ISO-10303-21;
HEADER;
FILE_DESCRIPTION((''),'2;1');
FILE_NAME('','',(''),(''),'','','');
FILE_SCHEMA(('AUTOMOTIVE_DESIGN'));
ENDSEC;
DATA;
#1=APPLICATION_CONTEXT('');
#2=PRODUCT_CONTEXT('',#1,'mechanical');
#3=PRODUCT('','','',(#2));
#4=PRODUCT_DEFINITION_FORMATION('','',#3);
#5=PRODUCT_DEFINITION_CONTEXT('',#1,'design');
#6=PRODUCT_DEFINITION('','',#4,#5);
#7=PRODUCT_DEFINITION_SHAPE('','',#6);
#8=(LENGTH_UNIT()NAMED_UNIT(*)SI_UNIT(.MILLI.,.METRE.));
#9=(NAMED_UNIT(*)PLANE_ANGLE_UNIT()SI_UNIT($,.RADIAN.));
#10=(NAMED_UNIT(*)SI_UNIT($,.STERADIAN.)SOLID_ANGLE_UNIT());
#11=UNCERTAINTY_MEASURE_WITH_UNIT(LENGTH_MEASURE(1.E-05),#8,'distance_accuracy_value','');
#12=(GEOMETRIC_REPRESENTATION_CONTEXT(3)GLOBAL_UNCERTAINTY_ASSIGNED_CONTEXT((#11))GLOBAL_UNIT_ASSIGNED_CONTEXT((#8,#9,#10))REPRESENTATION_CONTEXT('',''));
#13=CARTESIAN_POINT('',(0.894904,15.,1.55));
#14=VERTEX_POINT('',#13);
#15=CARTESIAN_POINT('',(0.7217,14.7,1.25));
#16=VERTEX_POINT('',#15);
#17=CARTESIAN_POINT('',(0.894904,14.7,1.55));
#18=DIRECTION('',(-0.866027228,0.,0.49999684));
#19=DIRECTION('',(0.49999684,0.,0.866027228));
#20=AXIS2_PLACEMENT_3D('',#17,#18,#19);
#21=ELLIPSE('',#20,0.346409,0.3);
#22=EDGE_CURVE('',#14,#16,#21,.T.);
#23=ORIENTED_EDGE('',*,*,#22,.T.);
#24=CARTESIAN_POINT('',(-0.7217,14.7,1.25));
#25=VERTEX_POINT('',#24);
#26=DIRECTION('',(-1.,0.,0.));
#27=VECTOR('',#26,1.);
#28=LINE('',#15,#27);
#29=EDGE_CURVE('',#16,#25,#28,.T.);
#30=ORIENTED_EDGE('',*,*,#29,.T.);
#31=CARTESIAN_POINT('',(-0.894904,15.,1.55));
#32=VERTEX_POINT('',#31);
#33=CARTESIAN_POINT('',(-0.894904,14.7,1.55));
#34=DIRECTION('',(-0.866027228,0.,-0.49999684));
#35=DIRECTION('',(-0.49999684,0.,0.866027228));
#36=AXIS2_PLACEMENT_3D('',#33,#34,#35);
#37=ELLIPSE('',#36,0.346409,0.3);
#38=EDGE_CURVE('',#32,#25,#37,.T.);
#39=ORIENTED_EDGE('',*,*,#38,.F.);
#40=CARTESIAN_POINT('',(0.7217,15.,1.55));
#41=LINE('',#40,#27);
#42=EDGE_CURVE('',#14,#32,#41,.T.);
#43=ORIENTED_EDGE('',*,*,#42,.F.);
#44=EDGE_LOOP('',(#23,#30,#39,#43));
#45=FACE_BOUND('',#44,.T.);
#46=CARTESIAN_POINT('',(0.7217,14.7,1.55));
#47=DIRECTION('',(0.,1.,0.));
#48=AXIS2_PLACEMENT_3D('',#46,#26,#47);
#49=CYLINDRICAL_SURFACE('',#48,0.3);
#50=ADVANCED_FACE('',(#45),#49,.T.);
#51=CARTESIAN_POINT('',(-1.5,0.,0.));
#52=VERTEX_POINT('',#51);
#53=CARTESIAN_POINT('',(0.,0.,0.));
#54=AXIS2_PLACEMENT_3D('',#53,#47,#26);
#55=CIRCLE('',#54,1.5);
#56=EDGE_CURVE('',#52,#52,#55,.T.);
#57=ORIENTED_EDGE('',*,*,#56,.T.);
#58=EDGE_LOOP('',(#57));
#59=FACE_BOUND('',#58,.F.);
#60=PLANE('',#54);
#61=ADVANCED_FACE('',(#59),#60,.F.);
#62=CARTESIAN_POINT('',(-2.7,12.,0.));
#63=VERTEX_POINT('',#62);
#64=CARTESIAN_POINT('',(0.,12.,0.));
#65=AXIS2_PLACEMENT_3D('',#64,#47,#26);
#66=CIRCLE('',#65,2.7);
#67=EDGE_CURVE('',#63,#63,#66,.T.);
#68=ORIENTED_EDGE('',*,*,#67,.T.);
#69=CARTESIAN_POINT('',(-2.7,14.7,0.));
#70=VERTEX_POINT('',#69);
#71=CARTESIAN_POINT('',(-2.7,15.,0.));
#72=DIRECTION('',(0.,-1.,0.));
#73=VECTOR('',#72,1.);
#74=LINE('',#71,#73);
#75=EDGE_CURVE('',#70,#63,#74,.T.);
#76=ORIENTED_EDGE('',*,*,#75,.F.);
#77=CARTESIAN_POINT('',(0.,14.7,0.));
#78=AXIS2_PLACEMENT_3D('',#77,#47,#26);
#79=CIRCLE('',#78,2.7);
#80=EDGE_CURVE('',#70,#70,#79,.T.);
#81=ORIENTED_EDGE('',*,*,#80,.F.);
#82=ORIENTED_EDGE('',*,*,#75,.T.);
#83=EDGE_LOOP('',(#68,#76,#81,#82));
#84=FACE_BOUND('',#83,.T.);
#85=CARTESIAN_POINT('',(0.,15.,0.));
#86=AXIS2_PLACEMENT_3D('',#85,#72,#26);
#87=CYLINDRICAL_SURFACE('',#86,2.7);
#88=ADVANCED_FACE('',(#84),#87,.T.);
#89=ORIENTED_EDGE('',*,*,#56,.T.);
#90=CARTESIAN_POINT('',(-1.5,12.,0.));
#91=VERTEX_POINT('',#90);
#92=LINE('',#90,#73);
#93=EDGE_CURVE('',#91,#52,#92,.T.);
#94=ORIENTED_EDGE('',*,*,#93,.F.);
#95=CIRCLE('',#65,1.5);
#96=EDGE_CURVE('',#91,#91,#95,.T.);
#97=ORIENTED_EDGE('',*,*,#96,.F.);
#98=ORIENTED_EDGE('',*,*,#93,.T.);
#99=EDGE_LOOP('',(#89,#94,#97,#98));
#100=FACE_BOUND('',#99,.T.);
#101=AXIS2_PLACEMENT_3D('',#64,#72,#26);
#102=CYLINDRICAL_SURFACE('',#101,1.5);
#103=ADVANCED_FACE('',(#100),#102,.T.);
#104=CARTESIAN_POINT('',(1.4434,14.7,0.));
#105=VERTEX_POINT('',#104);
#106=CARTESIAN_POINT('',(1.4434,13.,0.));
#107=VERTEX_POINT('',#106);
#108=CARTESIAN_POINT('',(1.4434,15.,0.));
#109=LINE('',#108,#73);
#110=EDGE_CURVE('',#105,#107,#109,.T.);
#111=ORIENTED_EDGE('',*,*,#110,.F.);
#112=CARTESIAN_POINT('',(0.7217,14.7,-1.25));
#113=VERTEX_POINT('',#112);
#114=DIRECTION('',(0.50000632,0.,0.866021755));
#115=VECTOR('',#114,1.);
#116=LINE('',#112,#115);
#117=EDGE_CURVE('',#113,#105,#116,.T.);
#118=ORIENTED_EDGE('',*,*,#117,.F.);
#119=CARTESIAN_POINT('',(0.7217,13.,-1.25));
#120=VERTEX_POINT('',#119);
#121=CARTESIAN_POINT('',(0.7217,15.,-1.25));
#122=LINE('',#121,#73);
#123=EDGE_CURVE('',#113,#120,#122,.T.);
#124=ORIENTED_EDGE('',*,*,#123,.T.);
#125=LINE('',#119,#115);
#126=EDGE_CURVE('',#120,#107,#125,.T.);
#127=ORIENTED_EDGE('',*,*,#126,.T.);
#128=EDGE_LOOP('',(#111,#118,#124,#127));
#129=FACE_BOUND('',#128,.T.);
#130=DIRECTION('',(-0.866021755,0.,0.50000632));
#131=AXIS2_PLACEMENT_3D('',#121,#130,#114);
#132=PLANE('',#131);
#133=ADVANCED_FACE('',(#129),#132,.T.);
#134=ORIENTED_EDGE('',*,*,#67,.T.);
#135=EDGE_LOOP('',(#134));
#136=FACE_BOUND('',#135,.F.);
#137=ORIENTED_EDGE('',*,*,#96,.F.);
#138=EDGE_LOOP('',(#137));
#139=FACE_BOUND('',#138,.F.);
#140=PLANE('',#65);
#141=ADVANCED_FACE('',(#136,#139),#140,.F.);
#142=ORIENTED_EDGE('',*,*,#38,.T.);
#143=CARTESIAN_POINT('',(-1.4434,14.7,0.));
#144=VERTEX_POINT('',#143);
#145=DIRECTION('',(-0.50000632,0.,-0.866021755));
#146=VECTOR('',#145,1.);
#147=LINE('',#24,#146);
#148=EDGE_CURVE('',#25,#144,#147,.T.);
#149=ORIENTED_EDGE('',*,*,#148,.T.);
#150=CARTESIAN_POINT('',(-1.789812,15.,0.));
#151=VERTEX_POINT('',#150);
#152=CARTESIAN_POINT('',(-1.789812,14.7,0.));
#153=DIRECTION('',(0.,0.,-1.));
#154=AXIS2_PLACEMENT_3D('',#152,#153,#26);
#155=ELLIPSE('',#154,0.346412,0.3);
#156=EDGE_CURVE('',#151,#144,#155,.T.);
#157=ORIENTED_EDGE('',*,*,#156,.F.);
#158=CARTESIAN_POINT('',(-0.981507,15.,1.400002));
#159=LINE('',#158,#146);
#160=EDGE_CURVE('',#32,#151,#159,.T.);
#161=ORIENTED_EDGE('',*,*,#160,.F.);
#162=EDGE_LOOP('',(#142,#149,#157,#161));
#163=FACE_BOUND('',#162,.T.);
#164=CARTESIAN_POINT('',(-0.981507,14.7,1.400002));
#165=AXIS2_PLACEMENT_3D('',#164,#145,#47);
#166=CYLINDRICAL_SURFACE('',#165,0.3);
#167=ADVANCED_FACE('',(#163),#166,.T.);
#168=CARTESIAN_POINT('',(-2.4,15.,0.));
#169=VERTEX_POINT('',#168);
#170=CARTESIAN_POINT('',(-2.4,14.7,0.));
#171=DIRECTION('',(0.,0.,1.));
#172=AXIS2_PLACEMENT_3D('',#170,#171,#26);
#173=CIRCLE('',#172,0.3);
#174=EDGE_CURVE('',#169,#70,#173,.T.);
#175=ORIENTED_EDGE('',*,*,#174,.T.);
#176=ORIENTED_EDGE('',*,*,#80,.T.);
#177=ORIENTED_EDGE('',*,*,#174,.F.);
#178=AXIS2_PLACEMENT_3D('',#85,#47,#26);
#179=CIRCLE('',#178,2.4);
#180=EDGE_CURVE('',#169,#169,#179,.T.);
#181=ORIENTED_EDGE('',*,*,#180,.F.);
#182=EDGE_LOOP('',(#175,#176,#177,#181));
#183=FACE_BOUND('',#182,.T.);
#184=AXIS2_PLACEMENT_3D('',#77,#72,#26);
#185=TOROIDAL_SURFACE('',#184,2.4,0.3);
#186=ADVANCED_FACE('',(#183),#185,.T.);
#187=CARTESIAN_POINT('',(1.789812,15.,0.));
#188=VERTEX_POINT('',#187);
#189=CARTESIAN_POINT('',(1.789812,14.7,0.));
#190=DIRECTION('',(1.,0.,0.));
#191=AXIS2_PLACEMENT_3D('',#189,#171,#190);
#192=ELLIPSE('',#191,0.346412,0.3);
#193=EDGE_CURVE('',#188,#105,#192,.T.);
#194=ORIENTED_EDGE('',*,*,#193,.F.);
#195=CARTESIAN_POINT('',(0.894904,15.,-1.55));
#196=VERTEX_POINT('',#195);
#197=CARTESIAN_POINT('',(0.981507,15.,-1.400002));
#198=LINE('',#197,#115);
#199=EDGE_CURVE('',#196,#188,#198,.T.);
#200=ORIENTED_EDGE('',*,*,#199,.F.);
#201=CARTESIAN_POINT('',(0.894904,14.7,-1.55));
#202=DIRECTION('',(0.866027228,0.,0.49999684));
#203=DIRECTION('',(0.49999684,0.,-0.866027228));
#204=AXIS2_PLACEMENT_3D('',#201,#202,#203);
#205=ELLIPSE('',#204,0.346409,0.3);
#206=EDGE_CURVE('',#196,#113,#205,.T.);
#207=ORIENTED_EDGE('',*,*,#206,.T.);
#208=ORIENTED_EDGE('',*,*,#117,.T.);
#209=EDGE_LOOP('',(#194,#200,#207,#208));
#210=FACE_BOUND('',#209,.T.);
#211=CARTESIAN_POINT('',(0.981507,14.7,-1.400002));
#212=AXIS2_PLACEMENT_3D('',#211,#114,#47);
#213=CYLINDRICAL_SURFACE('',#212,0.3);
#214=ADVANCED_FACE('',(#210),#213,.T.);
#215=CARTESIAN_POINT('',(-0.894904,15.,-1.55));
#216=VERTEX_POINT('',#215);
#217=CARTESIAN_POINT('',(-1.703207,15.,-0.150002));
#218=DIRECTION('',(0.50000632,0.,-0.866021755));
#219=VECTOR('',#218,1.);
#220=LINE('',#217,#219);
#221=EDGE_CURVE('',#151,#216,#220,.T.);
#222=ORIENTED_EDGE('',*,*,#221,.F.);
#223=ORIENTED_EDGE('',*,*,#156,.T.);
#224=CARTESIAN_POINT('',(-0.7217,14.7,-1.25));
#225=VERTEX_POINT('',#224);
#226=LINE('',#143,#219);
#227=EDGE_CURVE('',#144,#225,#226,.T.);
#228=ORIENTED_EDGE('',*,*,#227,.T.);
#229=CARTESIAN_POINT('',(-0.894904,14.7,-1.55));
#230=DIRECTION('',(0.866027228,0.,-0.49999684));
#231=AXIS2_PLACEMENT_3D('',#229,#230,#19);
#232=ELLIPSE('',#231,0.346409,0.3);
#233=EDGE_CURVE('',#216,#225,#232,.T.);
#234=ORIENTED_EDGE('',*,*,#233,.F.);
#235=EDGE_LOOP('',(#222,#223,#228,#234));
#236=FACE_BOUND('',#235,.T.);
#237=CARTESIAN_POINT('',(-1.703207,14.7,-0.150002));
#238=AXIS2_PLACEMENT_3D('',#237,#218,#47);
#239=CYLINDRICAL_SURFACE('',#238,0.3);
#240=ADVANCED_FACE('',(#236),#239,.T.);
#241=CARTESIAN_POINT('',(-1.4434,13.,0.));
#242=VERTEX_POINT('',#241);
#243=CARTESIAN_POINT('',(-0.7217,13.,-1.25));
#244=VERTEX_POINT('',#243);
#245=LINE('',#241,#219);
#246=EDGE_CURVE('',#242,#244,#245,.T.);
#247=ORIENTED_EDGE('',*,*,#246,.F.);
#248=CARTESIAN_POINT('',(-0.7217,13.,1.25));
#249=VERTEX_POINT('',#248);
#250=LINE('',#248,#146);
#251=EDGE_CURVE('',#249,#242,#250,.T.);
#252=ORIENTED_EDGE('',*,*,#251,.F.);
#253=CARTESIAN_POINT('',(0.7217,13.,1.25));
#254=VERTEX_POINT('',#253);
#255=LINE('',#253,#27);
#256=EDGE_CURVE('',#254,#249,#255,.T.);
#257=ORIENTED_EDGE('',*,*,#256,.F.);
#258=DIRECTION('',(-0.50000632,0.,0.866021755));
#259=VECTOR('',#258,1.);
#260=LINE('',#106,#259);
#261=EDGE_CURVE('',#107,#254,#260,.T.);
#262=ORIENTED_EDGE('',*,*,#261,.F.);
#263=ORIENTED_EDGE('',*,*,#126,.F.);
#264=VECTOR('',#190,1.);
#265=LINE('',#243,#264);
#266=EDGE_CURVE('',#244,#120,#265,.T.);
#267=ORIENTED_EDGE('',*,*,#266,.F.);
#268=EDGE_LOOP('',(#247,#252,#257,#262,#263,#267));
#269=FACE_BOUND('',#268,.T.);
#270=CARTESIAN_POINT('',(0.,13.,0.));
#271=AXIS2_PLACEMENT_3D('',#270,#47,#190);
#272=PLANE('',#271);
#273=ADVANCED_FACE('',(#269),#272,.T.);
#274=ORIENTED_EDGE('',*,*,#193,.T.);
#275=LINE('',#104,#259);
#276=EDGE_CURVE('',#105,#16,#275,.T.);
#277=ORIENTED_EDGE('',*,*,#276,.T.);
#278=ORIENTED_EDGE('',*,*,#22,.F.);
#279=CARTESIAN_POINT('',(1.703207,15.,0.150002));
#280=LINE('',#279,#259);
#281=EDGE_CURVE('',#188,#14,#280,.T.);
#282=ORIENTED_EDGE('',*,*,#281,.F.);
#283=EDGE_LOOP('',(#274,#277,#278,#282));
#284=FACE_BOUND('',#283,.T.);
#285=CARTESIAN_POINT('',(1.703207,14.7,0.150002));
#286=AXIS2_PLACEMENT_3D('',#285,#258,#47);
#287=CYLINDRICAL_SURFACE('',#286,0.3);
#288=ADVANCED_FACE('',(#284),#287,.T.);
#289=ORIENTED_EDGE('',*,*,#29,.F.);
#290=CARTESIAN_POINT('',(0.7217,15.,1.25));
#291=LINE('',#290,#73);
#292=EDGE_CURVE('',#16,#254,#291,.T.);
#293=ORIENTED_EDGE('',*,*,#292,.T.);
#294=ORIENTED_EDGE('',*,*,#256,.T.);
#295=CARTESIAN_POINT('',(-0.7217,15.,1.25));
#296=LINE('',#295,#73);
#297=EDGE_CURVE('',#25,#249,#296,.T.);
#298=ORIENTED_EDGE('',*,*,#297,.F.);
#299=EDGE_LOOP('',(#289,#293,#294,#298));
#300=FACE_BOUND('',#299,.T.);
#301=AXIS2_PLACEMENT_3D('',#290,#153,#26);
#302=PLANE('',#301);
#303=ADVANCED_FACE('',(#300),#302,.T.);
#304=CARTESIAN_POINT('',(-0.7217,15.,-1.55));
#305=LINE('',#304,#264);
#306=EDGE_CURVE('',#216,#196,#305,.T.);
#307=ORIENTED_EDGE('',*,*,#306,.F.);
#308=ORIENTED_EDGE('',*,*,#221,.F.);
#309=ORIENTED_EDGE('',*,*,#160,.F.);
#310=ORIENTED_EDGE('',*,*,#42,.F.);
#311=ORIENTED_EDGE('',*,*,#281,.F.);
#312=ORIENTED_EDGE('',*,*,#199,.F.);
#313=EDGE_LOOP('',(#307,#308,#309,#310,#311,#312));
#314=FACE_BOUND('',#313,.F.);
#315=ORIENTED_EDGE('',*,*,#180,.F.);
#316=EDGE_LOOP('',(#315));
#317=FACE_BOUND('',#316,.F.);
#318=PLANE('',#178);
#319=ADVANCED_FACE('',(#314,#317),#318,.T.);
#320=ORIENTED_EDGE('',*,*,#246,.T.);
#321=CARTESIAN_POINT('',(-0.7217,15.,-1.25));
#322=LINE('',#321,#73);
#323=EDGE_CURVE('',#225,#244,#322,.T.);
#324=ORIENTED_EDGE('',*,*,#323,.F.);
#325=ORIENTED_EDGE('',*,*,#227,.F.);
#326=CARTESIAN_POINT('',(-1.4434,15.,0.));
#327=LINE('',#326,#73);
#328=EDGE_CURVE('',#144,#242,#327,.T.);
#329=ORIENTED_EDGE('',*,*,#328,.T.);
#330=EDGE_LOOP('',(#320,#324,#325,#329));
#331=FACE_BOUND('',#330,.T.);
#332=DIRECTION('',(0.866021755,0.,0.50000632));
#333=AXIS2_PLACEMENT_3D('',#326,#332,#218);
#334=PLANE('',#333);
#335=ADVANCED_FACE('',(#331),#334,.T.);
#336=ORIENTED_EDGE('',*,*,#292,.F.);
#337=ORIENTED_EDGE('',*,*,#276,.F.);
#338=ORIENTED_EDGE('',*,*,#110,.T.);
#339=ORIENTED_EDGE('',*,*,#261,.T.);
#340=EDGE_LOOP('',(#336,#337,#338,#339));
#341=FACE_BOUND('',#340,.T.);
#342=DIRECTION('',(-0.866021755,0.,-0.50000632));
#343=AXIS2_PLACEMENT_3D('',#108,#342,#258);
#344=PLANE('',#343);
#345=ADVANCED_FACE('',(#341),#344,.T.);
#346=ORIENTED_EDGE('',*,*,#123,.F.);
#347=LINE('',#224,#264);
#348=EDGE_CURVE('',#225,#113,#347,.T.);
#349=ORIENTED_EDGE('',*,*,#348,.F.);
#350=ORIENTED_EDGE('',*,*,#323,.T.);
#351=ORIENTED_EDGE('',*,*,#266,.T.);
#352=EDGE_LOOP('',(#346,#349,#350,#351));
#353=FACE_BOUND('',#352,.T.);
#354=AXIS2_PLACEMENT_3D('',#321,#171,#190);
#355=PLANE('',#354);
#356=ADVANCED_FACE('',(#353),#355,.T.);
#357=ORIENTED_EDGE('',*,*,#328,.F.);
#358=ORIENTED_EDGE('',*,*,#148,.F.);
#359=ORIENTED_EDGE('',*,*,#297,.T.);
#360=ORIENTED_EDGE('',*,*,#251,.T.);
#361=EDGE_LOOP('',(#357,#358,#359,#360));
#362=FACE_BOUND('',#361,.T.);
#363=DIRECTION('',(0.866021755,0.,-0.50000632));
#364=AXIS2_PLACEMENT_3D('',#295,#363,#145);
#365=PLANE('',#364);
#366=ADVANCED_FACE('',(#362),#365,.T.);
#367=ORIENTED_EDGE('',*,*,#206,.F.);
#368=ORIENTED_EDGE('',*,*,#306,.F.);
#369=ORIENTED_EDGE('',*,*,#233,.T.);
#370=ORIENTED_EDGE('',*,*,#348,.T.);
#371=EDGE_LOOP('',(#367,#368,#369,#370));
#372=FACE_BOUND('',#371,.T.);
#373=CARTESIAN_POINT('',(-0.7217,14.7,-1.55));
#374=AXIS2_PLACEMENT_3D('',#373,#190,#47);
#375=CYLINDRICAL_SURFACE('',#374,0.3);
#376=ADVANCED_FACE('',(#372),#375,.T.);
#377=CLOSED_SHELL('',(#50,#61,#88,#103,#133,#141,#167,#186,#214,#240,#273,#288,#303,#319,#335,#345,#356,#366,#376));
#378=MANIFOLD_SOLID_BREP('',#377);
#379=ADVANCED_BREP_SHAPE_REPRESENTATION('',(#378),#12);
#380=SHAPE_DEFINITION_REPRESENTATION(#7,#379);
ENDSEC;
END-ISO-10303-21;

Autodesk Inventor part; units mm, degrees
ref_plane "YZ Plane" through (0, 0, 0) normal (1, 0, 0) x (0, 1, 0)
ref_plane "XZ Plane" through (0, 0, 0) normal (0, 1, 0) x (-1, 0, 0)
ref_plane "XY Plane" through (0, 0, 0) normal (0, 0, 1) x (1, 0, 0)
sketch "Sketch1" plane through (0, 0, 0) normal (0, 0, 1) x (1, 0, 0)
  line L0 (0, 0) -> (0, 15)
  line L1 (0, 15) -> (-2.7, 15)
  line L2 (-2.7, 15) -> (-2.7, 12)
  line L3 (-2.7, 12) -> (-1.5, 12)
  line L4 (-1.5, 12) -> (-1.5, 0)
  line L5 (-1.5, 0) -> (0, 0)
  dimension "d0" = 12
  dimension "d1" = 3
  dimension "d2" = 1.5
  dimension "d3" = 2.7
revolve "Revolution1" add sketch "Sketch1" angle 360 about axis through (0, 0, 0) along (0, 1, 0)
sketch "Sketch2" plane through (0, 15, 0) normal (0, 1, 0) x (1, 0, 0)
  line L0 (-0.7217, -1.25) -> (-1.4434, 0)
  line L1 (-1.4434, 0) -> (-0.7217, 1.25)
  line L2 (-0.7217, 1.25) -> (0.7217, 1.25)
  line L3 (0.7217, 1.25) -> (1.4434, 0)
  line L4 (1.4434, 0) -> (0.7217, -1.25)
  line L5 (0.7217, -1.25) -> (-0.7217, -1.25)
  point P0 (0, 0)
  point P1 (0, 0)
  dimension "d5" = 2.5
extrude "Extrusion1" cut sketch "Sketch2" against normal blind 2
fillet "Fillet1" radius 0.3 6 edges at (0, 15, -1.25) (1.0825, 15, -0.625) (1.0825, 15, 0.625) (0, 15, 1.25) (-1.0825, 15, 0.625) (-1.0825, 15, -0.625)
fillet "Fillet2" radius 0.3 1 edges at (2.7, 15, 0)
thread "Thread1" size "M3x0.5" class "6g" standard "ANSI Metric M Profile" length 11.5
properties part number "Screw_M4X12_SS_HEX" material "Stainless Steel"
